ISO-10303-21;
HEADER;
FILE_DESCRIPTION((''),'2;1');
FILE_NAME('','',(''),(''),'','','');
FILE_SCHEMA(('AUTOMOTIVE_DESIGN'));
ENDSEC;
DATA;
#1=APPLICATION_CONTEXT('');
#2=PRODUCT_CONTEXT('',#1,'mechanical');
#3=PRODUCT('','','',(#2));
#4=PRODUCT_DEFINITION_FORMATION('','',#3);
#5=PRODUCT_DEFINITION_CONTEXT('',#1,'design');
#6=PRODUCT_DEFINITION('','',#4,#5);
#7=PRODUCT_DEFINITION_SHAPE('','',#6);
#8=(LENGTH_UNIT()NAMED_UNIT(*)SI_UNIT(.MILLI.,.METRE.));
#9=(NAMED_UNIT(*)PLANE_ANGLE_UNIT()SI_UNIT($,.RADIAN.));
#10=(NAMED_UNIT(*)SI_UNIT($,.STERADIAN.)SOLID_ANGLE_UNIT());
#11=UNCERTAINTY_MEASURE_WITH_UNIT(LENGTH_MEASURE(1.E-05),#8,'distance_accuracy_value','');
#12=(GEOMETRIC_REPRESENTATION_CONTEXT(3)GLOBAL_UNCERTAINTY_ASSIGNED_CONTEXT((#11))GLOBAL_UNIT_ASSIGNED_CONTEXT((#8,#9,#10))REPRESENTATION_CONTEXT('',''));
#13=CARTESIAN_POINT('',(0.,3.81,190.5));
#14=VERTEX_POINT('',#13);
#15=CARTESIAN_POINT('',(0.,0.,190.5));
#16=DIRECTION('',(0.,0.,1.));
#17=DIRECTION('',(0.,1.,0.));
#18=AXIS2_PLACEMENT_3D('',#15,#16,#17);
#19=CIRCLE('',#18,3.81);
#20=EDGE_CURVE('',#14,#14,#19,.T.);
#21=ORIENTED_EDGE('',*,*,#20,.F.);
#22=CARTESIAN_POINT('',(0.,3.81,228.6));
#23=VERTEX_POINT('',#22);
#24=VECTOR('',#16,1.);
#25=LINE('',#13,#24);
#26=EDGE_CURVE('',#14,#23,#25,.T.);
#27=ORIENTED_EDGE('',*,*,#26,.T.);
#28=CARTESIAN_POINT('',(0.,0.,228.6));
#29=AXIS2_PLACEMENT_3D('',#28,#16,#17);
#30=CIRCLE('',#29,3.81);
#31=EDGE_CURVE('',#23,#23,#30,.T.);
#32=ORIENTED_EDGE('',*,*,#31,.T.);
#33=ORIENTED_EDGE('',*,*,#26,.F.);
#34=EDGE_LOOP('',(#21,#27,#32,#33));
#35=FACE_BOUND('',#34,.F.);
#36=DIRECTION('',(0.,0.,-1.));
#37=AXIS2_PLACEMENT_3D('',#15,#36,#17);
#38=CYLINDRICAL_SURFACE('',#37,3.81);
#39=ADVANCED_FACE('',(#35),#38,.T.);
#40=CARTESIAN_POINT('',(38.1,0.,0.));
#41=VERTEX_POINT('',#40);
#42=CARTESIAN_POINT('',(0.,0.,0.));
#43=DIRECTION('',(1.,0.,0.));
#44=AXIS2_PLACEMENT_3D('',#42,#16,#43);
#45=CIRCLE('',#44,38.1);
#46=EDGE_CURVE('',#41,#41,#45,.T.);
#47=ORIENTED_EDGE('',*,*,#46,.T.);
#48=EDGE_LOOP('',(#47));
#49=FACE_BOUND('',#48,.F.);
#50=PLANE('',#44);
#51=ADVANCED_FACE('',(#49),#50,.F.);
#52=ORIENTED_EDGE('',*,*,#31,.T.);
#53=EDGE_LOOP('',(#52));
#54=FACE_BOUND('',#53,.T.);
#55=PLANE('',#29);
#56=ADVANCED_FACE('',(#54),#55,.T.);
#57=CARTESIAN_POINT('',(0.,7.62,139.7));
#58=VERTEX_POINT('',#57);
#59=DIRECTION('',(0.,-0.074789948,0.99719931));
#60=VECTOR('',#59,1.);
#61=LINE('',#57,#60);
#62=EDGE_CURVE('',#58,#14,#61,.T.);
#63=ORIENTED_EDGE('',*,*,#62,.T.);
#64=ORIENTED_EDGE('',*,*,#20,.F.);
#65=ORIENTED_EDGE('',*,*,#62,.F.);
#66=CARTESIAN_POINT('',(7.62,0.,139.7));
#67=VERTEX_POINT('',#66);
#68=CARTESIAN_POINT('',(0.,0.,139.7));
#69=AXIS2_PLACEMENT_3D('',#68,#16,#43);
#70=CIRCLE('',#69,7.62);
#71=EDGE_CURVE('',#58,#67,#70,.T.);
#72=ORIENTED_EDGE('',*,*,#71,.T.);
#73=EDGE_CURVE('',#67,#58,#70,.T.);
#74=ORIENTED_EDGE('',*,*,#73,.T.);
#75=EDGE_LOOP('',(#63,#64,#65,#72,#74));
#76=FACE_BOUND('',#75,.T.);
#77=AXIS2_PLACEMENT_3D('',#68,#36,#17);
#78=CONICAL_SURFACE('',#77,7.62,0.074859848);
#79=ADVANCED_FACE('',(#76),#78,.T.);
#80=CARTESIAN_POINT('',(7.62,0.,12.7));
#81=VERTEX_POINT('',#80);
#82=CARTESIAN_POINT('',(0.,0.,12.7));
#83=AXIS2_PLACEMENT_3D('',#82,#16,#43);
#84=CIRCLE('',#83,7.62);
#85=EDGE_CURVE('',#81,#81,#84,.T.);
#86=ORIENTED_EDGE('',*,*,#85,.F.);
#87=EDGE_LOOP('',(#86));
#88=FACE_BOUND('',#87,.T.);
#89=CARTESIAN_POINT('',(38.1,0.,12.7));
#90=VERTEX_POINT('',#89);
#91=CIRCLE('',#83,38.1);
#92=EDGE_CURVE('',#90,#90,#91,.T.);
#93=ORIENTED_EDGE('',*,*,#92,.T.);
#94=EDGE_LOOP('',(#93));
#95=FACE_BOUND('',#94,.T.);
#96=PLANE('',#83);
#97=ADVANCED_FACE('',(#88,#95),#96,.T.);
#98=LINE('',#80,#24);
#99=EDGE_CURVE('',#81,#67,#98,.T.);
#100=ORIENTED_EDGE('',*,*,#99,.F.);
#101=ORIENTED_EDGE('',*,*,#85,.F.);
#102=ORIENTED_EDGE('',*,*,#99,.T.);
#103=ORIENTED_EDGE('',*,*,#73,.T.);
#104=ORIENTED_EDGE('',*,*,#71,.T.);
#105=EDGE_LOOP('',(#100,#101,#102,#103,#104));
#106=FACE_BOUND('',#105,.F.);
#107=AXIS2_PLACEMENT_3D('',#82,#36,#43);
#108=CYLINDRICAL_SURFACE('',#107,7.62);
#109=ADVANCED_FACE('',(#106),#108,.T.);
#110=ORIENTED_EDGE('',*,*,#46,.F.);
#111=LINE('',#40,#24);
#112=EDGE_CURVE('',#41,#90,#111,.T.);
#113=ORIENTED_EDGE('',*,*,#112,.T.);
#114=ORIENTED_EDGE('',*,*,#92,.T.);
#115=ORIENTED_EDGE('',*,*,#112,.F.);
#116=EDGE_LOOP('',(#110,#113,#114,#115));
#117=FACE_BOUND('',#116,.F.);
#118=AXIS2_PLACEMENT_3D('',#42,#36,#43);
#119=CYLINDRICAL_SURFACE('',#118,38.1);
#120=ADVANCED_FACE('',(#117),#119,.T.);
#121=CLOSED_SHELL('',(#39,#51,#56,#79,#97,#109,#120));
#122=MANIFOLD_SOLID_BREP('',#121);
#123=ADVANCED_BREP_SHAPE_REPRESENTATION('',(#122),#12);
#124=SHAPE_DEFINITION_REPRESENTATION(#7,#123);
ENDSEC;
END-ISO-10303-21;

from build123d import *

# Parameters (mm, degrees)
F0_R     = 38.1
F1_DEPTH = 12.7
F2_R     = 7.62
F3_DEPTH = 127
F6_DEPTH = 38.1


# Not quite as in the source:
# - a feature names something its author has since deleted; it is built from what else it names


with BuildPart() as f1:
    # F0 (on Top) → F1 (new body)
    with BuildSketch(Plane.XY):
        Circle(F0_R)
    extrude(amount=F1_DEPTH)

    # F2 (on face) → F3 (join)
    with BuildSketch(Plane.XY.offset(12.7)):
        Circle(F2_R)
    extrude(amount=F3_DEPTH)

    # F4 (on Right) → F5 (revolve)
    with BuildSketch(Plane.YZ):
        Polygon((0, 190.5), (0, 139.7), (7.62, 139.7), (3.81, 190.5), align=None)
    revolve(axis=Axis((0, 0, 165.1), (0, 0, 1)))

    # F6 (add): a face of the model
    f6_faces = [f1.faces().sort_by_distance(p)[0] for p in [
        (0, 0, 190.5),
    ]]
    extrude(f6_faces, amount=F6_DEPTH)


solid = f1.part
